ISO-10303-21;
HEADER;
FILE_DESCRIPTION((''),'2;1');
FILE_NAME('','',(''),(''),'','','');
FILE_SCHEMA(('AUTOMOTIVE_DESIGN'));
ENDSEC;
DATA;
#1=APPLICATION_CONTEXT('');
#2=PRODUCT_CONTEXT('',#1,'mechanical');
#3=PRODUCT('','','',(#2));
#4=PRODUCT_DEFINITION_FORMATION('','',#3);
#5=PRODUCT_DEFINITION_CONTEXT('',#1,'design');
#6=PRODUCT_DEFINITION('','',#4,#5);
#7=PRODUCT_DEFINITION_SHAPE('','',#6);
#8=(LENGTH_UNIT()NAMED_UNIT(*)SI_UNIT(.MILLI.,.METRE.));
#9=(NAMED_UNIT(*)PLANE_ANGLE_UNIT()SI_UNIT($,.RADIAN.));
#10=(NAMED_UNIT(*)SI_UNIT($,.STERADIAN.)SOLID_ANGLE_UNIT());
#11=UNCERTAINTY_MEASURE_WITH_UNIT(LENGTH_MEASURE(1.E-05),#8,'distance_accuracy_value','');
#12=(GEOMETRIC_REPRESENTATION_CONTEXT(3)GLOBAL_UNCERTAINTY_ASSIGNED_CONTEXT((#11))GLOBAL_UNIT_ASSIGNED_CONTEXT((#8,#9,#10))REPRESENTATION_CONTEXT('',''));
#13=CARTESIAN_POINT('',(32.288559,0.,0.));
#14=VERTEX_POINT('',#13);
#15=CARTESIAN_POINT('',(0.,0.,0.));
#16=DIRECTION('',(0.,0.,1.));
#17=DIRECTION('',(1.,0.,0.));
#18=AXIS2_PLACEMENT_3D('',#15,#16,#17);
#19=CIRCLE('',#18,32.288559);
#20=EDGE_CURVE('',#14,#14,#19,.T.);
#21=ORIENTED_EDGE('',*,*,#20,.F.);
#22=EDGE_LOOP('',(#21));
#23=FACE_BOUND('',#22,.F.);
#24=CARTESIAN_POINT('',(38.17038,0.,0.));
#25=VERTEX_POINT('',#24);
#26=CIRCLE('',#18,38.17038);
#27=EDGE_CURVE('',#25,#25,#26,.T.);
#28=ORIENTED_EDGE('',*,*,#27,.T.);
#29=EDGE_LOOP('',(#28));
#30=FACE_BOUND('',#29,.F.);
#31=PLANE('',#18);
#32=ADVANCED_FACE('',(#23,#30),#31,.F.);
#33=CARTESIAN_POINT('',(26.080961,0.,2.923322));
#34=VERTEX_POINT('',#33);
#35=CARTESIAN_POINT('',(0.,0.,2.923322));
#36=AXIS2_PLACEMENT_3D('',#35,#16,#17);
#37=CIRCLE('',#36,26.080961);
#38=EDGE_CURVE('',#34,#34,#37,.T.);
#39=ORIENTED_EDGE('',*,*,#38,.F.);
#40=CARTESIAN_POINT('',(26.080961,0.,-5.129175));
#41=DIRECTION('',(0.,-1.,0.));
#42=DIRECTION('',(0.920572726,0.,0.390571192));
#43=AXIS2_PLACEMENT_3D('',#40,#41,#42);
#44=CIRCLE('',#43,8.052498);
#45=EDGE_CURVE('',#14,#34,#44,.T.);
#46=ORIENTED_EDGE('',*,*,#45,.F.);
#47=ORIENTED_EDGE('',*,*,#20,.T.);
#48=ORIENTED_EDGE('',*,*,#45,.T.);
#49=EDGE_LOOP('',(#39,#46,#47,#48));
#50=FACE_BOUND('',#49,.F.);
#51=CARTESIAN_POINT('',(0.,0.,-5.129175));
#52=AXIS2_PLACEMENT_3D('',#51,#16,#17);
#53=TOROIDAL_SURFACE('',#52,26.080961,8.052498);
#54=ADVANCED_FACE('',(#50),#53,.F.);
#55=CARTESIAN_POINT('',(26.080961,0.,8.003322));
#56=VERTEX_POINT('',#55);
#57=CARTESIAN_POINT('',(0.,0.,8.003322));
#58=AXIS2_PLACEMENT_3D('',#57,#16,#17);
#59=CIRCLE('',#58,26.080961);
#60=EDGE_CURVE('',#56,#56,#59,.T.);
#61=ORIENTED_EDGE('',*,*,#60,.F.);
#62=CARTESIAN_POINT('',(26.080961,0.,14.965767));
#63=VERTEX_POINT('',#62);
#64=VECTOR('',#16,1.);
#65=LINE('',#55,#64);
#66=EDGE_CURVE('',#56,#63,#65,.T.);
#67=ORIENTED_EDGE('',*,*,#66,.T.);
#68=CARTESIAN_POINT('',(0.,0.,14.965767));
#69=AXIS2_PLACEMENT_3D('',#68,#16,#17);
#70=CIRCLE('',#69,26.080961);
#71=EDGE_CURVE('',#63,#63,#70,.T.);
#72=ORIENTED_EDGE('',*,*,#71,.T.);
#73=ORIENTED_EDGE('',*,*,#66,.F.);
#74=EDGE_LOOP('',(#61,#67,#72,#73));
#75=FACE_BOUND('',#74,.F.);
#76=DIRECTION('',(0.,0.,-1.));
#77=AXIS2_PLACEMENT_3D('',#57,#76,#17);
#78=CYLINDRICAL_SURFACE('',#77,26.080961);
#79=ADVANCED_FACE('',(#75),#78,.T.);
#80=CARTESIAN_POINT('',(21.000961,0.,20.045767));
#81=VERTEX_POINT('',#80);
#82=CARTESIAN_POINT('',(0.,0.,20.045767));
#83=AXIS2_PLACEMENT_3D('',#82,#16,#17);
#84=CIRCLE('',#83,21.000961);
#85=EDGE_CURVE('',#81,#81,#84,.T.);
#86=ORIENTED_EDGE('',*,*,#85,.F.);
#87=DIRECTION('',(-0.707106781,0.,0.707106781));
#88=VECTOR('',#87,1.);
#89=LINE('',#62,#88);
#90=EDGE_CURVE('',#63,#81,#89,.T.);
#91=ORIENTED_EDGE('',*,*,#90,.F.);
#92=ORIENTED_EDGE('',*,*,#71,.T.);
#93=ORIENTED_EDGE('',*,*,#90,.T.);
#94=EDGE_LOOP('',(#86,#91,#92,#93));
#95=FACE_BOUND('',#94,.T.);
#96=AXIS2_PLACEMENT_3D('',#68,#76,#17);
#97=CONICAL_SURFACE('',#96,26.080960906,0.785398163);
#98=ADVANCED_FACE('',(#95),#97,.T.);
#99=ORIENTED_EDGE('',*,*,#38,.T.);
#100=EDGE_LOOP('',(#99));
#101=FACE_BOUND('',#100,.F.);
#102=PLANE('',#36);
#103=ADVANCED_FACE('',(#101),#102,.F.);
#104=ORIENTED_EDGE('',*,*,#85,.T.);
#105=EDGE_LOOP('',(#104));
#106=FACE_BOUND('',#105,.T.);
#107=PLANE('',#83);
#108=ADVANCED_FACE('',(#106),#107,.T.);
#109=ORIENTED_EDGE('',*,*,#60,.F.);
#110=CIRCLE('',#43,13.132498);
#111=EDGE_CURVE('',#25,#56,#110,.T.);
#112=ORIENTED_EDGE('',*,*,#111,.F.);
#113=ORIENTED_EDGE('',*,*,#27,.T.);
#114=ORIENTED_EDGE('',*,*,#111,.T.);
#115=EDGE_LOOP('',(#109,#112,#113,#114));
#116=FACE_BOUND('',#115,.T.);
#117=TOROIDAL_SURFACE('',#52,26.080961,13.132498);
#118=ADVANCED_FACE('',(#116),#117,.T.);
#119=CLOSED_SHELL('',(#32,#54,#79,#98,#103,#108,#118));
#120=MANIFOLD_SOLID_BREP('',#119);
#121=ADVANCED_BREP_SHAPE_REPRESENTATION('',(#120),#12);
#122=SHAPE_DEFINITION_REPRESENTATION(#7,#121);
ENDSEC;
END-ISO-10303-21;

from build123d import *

# Parameters (mm, degrees)
F0_R     = 38.1703800994
F1_DEPTH = 8.0033224076
F3_T     = -5.08
F4_DEPTH = 12.0424441993
F5_SIZE  = 5.08


# Not quite as in the source:
# - a fillet or chamfer that OpenCascade refuses, or shapes differently, is made with other operations: its cross-section is extruded or revolved along the edge and cut away or added


with BuildPart() as f1:
    # F0 (on Top) → F1 (new body)
    with BuildSketch(Plane.XY):
        Circle(F0_R)
    extrude(amount=F1_DEPTH)

    # F2: fillet of radius 13.1324976857 on 1 edges, made by hand

    # F2_s1 → F2_t2 (revolve, cut)
    with BuildSketch(Plane.XZ):
        with BuildLine():
            ThreePointArc((38.1703800994, 0), (33.3302233857, 5.821198641), (26.0809609061, 8.0033224076))
            Line((26.0809609061, 8.0033224076), (38.1703800994, 8.0033224076))
            Line((38.1703800994, 8.0033224076), (38.1703800994, 0))
        make_face()
    revolve(axis=Axis((0, 0, 8.0033224076), (0, 0, 1)), mode=Mode.SUBTRACT)

    # F3
    f3_openings = [f1.faces().sort_by_distance(p)[0] for p in [
        (0, 0, 0),
    ]]
    offset(amount=F3_T, openings=f3_openings)

    # F4 (add): a face of the model
    f4_faces = [f1.faces().sort_by_distance(p)[0] for p in [
        (0, 0, 8.0033224076),
    ]]
    extrude(f4_faces, amount=F4_DEPTH)

    # F5
    f5_edges = [f1.edges().sort_by_distance(p)[0] for p in [
        (-26.080961, 0, 20.045767),
    ]]
    chamfer(f5_edges, length=F5_SIZE)


solid = f1.part
